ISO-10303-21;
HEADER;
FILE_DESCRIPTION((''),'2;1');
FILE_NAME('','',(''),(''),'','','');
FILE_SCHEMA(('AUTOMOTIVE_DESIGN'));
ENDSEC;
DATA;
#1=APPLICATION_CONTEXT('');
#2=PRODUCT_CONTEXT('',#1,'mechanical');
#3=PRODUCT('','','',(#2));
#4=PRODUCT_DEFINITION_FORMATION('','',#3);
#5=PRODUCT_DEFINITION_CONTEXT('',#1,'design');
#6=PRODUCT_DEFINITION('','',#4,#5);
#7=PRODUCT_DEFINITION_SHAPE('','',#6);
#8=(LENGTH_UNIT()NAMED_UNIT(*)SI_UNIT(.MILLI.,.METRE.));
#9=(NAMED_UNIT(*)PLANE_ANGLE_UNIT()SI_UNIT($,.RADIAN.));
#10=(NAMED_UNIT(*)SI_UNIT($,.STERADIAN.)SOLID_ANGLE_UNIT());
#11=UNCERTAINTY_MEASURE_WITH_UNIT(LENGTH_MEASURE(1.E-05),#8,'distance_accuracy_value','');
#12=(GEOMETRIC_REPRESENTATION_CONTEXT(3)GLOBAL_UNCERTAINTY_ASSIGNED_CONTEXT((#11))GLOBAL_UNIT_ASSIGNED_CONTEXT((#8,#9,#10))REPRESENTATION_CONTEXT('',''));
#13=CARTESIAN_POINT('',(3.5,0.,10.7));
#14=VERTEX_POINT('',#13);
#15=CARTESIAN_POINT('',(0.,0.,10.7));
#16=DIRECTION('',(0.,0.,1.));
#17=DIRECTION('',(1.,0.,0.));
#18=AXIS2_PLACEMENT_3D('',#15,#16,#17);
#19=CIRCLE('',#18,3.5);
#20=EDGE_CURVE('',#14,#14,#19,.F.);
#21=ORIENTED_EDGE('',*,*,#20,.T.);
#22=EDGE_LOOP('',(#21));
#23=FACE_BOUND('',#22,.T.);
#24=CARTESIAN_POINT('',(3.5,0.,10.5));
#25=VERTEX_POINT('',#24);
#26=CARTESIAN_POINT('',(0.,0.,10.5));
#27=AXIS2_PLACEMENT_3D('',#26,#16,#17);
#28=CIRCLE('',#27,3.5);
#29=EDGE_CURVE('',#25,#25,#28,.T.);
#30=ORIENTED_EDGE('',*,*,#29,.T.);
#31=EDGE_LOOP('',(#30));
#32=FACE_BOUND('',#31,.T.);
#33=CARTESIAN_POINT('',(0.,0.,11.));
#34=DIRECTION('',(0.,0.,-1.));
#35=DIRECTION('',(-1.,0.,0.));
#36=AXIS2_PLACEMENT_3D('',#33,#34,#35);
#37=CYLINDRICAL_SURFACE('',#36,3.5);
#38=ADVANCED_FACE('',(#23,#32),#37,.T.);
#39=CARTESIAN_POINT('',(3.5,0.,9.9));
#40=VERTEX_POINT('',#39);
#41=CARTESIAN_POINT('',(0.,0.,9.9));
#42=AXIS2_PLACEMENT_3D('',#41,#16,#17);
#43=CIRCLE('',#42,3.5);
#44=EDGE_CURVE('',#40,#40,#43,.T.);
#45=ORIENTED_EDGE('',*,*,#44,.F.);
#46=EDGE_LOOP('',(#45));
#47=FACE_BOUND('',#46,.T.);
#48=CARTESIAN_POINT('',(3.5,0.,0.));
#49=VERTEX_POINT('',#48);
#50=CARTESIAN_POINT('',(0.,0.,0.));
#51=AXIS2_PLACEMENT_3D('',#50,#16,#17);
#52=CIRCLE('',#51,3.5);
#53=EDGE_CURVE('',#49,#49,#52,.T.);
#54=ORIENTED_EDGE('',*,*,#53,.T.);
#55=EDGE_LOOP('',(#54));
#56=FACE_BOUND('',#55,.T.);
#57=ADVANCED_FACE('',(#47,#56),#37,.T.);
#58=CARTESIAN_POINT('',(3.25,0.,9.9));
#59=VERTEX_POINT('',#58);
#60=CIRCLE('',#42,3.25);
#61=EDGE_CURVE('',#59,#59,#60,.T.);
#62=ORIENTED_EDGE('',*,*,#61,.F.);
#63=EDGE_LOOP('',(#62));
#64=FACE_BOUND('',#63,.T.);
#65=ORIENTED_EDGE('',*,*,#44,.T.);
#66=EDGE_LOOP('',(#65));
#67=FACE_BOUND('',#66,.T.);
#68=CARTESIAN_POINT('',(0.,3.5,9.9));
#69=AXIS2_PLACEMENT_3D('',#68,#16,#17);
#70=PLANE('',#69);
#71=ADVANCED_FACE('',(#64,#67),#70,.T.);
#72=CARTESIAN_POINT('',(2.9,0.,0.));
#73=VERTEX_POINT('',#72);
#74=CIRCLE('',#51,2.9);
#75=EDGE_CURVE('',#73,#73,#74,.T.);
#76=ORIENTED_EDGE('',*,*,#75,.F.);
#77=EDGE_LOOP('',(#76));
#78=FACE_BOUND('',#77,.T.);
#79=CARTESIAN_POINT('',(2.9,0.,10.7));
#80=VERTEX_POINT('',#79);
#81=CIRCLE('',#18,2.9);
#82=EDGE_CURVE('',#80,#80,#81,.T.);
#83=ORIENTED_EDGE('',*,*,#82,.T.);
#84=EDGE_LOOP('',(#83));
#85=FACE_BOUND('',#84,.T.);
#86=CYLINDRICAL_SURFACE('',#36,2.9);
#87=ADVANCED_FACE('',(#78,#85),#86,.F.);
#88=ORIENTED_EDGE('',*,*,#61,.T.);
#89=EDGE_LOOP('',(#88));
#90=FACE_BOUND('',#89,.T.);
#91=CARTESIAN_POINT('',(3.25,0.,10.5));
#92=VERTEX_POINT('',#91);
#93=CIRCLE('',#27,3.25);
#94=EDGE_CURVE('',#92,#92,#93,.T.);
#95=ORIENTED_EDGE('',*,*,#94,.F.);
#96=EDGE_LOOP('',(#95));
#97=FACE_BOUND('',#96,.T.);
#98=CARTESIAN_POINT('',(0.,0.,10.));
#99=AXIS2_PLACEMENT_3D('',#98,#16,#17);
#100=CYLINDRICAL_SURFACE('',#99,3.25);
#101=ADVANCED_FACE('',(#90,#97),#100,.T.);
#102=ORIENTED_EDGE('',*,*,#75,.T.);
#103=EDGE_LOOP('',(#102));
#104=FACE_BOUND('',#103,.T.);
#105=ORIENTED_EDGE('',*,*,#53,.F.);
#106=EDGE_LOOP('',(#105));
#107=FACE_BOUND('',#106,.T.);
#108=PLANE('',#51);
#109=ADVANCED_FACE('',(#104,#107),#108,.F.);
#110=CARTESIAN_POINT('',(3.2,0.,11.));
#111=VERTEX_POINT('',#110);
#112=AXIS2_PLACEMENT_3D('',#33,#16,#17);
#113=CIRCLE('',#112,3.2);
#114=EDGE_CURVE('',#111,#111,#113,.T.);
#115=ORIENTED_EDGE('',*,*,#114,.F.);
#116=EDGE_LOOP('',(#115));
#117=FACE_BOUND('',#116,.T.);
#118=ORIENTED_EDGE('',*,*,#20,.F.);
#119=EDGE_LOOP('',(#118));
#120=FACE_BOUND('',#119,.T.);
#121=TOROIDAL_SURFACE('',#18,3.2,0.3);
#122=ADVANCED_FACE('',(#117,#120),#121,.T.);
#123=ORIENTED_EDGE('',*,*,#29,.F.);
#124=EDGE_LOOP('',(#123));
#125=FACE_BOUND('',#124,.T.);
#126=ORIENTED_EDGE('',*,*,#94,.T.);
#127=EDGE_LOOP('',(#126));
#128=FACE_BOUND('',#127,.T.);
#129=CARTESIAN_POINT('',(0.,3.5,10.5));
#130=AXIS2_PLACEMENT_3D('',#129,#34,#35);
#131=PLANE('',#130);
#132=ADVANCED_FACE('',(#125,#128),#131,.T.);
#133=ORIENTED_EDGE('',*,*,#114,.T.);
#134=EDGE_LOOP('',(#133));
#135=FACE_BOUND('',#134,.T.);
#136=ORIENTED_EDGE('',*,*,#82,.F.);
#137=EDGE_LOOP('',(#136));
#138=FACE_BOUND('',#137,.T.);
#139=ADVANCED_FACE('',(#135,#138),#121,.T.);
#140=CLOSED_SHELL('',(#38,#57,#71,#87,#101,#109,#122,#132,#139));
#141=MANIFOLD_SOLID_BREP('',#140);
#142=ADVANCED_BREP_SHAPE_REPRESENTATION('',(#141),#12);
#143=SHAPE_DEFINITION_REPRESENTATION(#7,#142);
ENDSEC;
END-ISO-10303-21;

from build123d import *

# Parameters (mm, degrees)
ESQUISSE1_R          = 3.5
ESQUISSE1_R_2        = 2.9
BASE_EXTRUSION_DEPTH = 11
ESQUISSE2_W          = 0.6
ESQUISSE2_H          = 0.25
CONG_3_R             = 0.3


with BuildPart() as part:
    # Esquisse1 → Base-Extrusion (new body)
    with BuildSketch(Plane.XY):
        Circle(ESQUISSE1_R)
        Circle(ESQUISSE1_R_2, mode=Mode.SUBTRACT)
    extrude(amount=BASE_EXTRUSION_DEPTH)

    # Esquisse2 → Enlèvement de matière-Révolution1 (revolve, cut)
    with BuildSketch(Plane(origin=(0, 0, 0), x_dir=(0, 0, -1), z_dir=(1, 0, 0)), mode=Mode.PRIVATE) as enl_vement_de_mati_re_r_volution1_sk:
        with Locations((-10.2, 3.375)):
            Rectangle(ESQUISSE2_W, ESQUISSE2_H)
    revolve(enl_vement_de_mati_re_r_volution1_sk.sketch.rotate(Axis((0, 0, 10), (0, 0, -1)), 90), axis=Axis((0, 0, 10), (0, 0, -1)), mode=Mode.SUBTRACT)

    # Congé3
    cong_3_edges = [part.edges().sort_by_distance(p)[0] for p in [
        (-2.9, 0, 11),
        (-3.5, 0, 11),
    ]]
    fillet(cong_3_edges, radius=CONG_3_R - 0.0001)  # a hair under: the kernel refuses the full size


solid = part.part
